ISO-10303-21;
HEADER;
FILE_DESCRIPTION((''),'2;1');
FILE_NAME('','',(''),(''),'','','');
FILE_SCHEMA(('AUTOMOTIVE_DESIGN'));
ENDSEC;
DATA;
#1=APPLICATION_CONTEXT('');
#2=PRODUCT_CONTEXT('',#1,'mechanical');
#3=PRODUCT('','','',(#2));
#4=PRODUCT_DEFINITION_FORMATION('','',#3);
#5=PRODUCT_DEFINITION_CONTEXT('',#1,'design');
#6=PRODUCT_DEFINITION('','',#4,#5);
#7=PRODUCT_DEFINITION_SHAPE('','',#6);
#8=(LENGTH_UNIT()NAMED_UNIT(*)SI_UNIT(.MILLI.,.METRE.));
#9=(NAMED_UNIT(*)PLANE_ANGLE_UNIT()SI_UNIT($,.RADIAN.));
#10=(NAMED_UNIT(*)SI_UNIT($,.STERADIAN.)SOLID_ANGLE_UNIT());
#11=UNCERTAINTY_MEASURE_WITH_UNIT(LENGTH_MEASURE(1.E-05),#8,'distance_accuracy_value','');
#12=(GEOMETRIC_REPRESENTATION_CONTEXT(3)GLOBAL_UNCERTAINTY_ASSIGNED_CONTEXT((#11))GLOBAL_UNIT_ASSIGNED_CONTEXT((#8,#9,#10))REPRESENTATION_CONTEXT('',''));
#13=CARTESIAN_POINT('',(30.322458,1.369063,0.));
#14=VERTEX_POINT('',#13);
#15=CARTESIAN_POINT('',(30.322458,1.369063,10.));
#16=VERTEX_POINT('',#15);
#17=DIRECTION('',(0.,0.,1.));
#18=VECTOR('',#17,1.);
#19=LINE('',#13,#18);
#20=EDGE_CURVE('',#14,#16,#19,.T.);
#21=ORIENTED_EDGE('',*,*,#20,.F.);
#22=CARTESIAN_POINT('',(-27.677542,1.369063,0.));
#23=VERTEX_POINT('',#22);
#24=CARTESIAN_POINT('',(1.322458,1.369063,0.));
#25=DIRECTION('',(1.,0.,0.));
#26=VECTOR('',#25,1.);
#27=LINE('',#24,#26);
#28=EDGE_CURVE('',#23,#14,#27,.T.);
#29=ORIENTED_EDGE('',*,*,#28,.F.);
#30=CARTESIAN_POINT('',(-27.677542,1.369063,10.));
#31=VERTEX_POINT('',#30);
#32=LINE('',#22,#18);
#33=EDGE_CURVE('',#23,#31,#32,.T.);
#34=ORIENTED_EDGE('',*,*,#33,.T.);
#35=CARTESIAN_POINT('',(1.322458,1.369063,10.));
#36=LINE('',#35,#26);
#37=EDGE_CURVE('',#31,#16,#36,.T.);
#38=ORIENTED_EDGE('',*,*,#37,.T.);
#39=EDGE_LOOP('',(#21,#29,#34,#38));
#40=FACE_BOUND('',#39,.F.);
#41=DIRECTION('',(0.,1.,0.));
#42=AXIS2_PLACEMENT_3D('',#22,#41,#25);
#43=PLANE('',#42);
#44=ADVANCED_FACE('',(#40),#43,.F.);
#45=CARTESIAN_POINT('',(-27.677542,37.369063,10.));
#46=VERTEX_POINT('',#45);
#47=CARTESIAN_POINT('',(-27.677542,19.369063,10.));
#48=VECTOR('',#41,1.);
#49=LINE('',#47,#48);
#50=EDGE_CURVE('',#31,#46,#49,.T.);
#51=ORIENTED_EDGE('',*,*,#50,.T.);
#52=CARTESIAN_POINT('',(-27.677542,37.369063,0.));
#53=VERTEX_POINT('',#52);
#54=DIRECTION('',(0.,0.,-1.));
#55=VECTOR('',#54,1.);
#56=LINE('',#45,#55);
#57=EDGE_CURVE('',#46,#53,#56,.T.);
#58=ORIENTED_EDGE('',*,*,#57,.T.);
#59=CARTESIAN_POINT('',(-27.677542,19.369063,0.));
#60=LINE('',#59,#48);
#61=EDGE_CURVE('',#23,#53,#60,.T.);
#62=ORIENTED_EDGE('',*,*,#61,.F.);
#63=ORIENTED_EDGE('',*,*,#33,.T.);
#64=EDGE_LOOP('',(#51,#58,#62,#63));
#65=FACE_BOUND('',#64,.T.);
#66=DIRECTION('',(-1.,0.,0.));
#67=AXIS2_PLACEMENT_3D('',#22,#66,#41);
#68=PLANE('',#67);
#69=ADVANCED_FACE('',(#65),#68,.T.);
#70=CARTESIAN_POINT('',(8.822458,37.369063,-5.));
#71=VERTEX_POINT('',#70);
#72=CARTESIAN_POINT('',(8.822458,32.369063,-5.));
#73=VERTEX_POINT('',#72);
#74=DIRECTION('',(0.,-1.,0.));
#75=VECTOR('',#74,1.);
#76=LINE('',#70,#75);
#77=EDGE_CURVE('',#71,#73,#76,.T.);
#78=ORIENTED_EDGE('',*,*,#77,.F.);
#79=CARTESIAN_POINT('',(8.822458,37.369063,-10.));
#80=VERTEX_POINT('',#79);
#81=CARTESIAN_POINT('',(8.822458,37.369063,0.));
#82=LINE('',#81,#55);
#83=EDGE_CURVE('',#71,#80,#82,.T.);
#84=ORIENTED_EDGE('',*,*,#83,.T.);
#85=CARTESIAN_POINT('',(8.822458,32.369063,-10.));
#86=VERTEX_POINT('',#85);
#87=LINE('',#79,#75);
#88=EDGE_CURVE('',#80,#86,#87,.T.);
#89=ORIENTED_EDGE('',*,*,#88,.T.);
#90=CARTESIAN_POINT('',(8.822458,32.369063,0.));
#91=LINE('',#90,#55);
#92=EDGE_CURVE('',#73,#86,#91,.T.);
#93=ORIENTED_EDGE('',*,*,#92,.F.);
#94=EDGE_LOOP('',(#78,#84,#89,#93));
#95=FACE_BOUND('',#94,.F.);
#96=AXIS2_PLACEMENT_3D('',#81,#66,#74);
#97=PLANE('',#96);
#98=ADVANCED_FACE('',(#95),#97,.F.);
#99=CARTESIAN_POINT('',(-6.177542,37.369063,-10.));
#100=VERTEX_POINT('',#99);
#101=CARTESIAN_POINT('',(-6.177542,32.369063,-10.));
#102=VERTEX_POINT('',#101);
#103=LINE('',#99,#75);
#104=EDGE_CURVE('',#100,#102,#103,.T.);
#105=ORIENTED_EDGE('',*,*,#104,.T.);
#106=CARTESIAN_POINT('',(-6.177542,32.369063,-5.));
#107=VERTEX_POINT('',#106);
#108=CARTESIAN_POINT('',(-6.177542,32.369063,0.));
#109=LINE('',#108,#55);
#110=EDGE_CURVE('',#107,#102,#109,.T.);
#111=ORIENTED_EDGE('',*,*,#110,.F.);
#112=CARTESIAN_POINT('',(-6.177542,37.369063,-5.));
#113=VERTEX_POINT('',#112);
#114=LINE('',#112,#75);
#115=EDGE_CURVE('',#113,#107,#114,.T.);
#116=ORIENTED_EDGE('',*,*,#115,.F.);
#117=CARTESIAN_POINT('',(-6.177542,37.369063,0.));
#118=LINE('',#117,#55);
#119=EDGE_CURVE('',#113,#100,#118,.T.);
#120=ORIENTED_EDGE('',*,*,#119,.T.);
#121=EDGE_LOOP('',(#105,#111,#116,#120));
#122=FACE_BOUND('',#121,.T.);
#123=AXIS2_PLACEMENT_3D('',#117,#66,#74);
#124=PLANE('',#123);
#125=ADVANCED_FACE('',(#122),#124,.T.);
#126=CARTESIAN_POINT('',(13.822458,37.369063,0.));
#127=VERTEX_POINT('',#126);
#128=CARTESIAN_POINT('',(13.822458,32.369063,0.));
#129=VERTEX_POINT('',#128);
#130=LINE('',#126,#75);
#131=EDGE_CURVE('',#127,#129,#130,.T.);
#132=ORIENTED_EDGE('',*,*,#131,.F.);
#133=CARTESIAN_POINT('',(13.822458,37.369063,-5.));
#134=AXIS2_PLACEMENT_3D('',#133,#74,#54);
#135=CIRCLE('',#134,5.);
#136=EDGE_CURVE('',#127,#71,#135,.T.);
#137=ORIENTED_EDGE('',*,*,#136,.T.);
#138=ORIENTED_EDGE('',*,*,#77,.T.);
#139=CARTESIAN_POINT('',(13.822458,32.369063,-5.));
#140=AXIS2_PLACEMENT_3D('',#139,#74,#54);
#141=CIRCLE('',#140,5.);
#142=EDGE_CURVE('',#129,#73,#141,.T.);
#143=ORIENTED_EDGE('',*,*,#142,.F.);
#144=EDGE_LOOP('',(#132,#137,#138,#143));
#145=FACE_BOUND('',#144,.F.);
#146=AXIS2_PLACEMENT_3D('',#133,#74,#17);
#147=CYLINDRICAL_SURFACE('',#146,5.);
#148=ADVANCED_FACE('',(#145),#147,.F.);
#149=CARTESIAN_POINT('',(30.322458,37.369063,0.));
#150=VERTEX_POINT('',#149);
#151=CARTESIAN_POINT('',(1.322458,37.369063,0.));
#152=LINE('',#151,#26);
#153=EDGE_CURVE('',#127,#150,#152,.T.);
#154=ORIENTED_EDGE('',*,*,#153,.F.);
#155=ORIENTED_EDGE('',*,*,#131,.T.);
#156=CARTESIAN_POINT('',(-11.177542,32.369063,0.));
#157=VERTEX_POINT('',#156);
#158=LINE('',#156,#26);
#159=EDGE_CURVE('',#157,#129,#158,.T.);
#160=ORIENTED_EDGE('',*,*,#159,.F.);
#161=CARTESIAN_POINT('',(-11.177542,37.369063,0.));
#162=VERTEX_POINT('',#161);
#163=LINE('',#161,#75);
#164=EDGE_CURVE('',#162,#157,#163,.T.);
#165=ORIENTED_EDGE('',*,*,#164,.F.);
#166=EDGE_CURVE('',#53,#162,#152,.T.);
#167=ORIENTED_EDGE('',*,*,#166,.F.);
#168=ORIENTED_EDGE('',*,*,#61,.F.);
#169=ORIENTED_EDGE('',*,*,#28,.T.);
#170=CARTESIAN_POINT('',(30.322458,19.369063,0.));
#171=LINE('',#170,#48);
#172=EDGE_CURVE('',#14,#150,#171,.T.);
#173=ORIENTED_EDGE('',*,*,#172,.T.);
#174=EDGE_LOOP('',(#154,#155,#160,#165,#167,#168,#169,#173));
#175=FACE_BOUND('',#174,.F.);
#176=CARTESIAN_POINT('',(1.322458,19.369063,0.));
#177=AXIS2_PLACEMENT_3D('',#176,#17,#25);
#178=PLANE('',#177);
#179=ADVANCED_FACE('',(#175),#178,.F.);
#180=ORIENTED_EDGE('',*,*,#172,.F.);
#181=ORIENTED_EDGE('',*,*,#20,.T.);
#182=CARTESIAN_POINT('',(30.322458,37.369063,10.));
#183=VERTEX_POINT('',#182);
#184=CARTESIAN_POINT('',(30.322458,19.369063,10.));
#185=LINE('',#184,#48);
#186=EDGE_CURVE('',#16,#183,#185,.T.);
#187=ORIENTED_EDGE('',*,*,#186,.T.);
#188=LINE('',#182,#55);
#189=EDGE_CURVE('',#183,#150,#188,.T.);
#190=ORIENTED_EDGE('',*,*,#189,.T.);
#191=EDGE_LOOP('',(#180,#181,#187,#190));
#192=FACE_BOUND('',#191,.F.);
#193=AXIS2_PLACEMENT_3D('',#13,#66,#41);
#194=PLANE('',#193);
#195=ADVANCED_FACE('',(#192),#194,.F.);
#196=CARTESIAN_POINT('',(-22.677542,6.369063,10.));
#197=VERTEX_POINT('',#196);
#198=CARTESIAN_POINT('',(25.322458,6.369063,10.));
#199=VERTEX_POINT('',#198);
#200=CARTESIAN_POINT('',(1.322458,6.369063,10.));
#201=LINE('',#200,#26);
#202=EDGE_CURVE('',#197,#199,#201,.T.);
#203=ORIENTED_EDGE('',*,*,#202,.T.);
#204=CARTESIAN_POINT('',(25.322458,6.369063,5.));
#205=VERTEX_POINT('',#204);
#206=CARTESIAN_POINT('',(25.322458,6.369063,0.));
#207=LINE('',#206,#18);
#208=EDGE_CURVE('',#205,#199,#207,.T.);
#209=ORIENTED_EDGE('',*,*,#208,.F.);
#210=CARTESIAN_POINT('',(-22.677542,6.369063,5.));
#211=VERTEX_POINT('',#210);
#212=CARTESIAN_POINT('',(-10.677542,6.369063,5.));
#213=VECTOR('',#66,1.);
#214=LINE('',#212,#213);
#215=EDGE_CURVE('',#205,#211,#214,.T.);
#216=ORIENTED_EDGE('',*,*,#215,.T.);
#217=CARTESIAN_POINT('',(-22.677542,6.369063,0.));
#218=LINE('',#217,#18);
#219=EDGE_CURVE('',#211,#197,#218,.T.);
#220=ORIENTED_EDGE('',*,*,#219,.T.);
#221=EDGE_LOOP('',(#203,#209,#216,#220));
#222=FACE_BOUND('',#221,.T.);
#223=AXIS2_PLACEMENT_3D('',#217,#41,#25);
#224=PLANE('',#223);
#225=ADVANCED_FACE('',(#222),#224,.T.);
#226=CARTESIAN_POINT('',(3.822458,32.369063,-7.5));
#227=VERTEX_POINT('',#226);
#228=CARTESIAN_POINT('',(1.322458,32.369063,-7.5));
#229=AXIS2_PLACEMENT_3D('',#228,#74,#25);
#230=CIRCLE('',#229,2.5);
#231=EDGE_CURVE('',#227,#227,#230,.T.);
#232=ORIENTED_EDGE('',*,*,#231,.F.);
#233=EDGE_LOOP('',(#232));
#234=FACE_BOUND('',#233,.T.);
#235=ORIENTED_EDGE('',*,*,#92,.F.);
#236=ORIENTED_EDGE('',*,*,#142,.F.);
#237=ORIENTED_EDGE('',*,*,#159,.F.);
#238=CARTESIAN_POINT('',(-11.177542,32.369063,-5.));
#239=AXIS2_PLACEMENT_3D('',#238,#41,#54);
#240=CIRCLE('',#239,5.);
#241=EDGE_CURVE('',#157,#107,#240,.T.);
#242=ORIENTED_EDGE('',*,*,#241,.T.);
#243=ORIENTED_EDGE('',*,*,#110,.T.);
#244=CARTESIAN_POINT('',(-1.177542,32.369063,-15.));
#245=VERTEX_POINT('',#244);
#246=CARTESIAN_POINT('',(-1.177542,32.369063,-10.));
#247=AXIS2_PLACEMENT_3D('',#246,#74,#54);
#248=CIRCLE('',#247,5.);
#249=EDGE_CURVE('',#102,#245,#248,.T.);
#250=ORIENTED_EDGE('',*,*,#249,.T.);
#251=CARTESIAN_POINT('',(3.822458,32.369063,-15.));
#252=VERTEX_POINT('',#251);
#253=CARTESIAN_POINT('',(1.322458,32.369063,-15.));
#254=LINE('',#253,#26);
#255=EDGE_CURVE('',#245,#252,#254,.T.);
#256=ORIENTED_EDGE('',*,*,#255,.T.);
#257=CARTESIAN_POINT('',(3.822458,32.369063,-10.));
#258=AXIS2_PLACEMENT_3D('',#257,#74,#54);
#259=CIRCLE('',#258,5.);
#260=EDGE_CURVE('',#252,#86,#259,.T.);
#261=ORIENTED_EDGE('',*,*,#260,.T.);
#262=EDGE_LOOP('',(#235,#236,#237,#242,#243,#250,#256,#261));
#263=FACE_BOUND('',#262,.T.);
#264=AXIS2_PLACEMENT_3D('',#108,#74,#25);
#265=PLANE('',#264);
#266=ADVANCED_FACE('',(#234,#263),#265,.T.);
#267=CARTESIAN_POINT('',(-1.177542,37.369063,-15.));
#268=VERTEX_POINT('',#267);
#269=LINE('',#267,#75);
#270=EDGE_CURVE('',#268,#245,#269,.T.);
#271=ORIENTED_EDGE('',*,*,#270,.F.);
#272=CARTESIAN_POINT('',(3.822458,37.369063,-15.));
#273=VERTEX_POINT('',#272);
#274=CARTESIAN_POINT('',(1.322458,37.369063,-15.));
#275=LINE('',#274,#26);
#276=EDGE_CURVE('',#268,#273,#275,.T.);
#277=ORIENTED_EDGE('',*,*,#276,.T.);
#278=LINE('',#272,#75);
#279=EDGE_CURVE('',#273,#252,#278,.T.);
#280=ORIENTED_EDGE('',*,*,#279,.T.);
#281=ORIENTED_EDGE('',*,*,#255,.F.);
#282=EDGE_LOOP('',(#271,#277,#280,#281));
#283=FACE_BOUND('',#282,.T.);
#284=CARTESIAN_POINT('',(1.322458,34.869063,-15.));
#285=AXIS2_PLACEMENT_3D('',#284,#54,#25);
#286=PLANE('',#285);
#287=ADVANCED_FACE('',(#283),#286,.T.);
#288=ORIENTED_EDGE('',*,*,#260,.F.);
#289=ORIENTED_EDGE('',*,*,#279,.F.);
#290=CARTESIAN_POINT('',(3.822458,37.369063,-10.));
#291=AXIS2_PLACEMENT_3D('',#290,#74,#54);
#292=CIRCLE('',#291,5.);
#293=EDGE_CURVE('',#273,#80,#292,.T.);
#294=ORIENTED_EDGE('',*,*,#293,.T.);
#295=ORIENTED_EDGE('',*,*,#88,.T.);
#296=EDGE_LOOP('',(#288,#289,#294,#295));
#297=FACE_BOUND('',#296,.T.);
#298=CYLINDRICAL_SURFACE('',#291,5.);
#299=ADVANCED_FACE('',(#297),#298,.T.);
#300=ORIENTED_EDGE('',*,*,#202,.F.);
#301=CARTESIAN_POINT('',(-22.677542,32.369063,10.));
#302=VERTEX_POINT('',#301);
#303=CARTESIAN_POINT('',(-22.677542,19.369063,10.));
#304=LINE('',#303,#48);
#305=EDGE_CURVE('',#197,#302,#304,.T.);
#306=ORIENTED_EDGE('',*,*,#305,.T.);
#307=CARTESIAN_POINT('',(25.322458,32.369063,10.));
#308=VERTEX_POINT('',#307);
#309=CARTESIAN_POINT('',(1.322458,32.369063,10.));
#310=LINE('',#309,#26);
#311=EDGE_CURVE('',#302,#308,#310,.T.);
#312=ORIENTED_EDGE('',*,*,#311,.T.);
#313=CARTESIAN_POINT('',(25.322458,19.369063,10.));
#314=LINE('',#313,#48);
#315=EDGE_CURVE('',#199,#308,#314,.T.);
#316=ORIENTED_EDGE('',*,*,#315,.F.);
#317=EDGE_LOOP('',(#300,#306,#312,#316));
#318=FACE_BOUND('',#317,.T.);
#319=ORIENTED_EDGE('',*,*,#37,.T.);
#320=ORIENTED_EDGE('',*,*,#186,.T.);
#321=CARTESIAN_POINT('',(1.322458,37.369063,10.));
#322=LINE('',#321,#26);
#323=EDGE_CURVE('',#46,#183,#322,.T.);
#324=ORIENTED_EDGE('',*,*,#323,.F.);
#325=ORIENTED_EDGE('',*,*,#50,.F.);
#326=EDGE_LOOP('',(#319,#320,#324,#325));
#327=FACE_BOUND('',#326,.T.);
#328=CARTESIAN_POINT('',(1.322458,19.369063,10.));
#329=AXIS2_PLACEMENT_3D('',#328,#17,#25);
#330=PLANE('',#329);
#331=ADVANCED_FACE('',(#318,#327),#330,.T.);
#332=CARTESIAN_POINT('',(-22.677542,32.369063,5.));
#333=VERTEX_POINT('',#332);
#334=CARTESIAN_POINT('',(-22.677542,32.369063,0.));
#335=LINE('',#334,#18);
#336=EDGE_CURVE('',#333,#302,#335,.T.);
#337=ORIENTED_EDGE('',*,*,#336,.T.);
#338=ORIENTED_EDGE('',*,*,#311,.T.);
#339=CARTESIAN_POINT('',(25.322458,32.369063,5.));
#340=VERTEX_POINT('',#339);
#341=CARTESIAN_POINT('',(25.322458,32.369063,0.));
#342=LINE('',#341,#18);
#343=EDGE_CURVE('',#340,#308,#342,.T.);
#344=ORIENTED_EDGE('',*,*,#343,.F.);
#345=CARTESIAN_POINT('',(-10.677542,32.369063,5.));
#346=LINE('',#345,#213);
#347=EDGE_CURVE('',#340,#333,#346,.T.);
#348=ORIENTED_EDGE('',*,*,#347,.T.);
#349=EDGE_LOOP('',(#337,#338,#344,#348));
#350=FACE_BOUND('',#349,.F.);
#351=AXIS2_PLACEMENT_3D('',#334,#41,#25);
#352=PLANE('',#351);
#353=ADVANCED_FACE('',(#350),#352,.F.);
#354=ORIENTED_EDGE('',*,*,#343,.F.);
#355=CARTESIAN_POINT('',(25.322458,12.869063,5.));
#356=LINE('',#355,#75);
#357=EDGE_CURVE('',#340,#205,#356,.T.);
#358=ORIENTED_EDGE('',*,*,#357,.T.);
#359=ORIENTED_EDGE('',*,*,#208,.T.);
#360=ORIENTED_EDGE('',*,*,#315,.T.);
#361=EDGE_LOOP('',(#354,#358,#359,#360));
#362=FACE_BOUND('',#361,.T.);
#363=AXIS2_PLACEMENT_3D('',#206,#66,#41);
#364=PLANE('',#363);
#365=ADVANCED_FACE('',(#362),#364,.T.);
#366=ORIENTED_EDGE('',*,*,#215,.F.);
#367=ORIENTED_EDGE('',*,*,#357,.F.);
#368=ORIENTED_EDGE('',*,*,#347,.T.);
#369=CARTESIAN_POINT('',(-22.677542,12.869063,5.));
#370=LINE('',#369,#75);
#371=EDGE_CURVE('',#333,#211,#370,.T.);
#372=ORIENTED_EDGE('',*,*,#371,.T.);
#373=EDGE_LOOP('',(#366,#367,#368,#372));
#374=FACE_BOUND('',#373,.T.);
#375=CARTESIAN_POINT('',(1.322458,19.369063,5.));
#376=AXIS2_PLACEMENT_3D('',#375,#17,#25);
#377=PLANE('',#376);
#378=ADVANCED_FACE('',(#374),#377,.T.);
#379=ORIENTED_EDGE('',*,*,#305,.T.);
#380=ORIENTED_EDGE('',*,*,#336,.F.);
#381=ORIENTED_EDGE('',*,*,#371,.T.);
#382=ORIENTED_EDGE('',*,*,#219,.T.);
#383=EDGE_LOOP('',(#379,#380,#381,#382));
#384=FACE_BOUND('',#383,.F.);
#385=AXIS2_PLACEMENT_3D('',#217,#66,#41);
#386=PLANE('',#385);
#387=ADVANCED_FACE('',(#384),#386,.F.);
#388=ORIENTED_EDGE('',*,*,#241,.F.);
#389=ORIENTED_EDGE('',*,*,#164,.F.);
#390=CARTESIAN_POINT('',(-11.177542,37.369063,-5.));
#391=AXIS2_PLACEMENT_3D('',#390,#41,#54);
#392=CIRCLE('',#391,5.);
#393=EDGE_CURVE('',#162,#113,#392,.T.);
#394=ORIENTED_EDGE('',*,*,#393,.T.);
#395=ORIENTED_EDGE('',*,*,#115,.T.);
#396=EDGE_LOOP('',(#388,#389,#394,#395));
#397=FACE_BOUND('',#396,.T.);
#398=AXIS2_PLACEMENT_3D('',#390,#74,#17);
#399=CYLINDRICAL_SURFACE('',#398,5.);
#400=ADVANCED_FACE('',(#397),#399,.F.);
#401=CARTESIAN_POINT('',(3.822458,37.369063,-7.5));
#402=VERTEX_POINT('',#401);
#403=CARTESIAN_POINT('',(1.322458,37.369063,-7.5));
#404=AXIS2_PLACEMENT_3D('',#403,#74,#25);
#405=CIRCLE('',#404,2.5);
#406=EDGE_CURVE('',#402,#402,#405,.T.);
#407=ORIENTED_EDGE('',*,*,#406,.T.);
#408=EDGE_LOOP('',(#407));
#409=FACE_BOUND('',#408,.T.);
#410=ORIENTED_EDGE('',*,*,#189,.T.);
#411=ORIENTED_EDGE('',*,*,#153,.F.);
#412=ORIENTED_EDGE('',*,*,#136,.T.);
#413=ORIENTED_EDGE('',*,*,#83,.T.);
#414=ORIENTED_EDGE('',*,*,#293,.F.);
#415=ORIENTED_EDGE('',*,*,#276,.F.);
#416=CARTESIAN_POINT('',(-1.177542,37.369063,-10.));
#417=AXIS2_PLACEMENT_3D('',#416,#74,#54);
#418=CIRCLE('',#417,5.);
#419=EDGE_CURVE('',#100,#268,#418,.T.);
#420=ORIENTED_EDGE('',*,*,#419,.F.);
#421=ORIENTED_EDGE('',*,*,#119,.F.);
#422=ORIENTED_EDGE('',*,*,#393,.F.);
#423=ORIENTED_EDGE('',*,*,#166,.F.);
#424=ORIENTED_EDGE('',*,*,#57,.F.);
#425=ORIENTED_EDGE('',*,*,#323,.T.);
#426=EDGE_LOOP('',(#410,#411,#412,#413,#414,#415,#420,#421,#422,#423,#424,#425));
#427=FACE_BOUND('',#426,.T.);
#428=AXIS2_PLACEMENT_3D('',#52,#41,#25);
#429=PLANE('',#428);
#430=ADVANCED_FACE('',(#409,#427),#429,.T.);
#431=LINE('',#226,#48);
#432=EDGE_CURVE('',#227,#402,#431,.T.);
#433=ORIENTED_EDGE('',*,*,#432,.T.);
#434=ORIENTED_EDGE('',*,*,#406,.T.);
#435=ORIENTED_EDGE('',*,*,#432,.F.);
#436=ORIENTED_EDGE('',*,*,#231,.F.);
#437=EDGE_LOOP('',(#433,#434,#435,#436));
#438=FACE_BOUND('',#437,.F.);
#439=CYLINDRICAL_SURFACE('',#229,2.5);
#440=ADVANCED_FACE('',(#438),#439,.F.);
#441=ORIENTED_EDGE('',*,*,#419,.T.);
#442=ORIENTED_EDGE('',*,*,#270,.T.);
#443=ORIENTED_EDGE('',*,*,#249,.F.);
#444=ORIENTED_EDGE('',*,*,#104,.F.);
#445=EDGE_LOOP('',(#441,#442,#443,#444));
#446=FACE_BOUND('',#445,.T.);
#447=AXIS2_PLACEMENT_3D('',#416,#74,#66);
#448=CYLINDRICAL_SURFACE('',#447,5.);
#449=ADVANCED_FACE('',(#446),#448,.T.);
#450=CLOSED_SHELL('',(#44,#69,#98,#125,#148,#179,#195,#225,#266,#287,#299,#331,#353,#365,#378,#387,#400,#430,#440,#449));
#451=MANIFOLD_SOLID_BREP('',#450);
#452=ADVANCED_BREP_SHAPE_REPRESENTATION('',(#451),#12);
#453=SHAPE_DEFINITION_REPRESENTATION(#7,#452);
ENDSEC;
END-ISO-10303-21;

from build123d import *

# Parameters (mm, degrees)
F0_W     = 58
F0_H     = 36
F0_W_2   = 48
F0_H_2   = 26
F1_DEPTH = 5
F2_DEPTH = 10
F3_W     = 15
F3_H     = 5
F4_DEPTH = 15
F5_R     = 2.5
F6_DEPTH = 25
F7_R     = 5


# Not quite as in the source:
# - a feature names something its author has since deleted; it is built from what else it names


with BuildPart() as f1:
    # F0 (on Top) → F1 (new body)
    with BuildSketch(Plane.XY):
        with Locations((1.3224579843, 19.3690634753)):
            Rectangle(F0_W, F0_H)
        with Locations((1.3224579843, 19.3690634753)):
            Rectangle(F0_W_2, F0_H_2, mode=Mode.SUBTRACT)
        with Locations((1.3224579843, 19.3690634753)):
            Rectangle(F0_W_2, F0_H_2)
    extrude(amount=F1_DEPTH)

    # F0 (on Top) → F2 (join)
    with BuildSketch(Plane.XY):
        with Locations((1.3224579843, 19.3690634753)):
            Rectangle(F0_W, F0_H)
        with Locations((1.3224579843, 19.3690634753)):
            Rectangle(F0_W_2, F0_H_2, mode=Mode.SUBTRACT)
    extrude(amount=F2_DEPTH)

    # F3 (on face) → F4 (join)
    with BuildSketch(Plane(origin=(0, 0, 0), x_dir=(1, 0, 0), z_dir=(0, 0, -1))):
        with Locations((1.3224579843, -34.8690634753)):
            Rectangle(F3_W, F3_H)
    extrude(amount=F4_DEPTH)

    # F5 (on face) → F6 (cut)
    with BuildSketch(Plane.XZ.offset(-32.3690634753)):
        with Locations((1.3224579843, -7.5)):
            Circle(F5_R)
    extrude(amount=-F6_DEPTH, mode=Mode.SUBTRACT)

    # F7
    f7_edges = [f1.edges().sort_by_distance(p)[0] for p in [
        (8.822458, 34.869063, -15),
        (-6.177542, 34.869063, -15),
        (8.822458, 34.869063, 0),
        (-6.177542, 34.869063, 0),
    ]]
    fillet(f7_edges, radius=F7_R)


solid = f1.part
